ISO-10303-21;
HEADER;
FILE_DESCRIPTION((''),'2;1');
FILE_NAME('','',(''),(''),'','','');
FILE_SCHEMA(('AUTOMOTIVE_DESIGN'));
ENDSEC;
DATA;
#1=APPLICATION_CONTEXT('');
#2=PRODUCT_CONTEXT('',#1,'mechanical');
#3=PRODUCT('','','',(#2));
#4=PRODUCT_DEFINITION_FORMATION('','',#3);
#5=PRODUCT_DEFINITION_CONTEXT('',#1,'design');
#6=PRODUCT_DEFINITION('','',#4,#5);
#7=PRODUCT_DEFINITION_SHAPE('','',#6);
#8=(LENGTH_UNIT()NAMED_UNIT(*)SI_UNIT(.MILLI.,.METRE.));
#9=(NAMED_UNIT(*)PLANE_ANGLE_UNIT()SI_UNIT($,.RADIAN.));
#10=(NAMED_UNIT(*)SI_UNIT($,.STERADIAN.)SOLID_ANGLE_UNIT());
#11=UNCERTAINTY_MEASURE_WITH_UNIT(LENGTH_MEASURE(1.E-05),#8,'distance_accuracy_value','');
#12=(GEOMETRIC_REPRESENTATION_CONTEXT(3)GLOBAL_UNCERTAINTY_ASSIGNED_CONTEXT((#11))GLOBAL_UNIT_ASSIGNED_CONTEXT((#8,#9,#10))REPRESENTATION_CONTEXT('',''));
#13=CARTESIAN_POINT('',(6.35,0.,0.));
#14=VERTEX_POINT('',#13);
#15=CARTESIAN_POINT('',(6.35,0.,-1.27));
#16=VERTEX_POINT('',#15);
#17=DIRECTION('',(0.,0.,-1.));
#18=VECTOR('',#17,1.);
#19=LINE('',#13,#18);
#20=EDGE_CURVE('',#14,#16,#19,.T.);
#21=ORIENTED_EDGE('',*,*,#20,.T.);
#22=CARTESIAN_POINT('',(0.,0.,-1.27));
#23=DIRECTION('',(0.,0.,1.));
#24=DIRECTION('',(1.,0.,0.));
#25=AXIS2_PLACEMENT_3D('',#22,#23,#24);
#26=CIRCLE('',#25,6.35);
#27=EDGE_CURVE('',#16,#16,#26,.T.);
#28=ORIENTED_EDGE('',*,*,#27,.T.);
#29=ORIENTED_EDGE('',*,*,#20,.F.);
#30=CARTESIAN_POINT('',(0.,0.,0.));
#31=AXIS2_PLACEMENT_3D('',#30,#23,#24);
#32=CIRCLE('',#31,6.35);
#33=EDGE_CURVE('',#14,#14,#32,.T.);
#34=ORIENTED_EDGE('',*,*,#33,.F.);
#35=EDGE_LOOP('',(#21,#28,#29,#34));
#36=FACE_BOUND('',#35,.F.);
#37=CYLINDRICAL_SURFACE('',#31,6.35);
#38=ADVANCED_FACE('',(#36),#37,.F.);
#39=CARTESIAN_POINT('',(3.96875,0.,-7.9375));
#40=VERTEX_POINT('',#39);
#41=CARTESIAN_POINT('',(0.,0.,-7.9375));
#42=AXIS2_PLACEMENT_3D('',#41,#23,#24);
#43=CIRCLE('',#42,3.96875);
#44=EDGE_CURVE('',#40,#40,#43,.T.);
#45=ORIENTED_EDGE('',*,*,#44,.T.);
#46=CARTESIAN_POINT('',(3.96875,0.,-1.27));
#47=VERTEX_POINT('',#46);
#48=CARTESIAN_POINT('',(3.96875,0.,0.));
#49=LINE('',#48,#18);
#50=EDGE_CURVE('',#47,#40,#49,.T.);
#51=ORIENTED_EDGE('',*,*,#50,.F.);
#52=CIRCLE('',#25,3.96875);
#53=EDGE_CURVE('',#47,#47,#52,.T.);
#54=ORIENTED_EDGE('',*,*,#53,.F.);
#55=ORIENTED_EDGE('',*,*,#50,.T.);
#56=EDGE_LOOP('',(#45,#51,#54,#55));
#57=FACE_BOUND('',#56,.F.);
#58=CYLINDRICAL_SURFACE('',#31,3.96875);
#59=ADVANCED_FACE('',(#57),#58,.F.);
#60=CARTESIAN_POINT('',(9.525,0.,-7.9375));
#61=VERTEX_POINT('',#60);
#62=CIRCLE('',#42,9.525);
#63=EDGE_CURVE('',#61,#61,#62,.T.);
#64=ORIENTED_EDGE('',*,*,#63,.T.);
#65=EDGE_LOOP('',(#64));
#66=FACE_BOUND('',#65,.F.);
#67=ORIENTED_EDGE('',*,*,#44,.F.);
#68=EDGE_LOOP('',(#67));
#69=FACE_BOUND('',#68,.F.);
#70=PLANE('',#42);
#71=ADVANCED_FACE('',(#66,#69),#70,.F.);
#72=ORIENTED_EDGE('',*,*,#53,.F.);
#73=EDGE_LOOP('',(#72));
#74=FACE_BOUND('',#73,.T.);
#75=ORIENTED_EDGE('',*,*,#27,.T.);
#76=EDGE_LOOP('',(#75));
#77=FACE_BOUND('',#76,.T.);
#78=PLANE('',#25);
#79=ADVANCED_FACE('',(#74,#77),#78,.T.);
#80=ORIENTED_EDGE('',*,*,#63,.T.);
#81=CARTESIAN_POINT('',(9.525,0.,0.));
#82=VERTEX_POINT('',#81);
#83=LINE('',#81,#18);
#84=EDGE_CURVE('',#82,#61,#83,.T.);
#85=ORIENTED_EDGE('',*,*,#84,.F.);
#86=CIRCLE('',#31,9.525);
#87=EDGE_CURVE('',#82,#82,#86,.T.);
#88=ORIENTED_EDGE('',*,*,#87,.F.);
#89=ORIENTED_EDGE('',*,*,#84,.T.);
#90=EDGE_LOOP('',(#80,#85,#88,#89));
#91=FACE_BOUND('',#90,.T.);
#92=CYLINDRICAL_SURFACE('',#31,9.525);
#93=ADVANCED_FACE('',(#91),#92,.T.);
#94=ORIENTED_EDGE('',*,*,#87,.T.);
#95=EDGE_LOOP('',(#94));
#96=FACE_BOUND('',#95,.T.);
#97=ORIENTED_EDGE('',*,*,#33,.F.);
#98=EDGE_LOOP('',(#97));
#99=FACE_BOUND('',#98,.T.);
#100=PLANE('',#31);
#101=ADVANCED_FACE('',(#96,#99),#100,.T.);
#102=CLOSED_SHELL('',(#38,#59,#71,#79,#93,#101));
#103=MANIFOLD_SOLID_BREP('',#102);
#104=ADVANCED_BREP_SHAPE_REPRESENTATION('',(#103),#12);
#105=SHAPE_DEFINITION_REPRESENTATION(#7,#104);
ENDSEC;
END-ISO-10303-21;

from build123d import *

# Parameters (mm, degrees)
F0_R     = 9.525
F0_R_2   = 6.35
F0_R_3   = 3.96875
F1_DEPTH = 7.9375
F2_DEPTH = 1.27


# Not quite as in the source:
# - a length typed as a fraction of an inch, garbled in the dataset ("3 / 203.2 mm" for 3/8 in), is restored


with BuildPart() as f1:
    # F0 (on Top) → F1 (new body)
    with BuildSketch(Plane.XY):
        Circle(F0_R)
        Circle(F0_R_2, mode=Mode.SUBTRACT)
        Circle(F0_R_2)
        Circle(F0_R_3, mode=Mode.SUBTRACT)
    extrude(amount=-F1_DEPTH)

    # F0 (on Top) → F2 (cut)
    with BuildSketch(Plane.XY):
        Circle(F0_R_2)
        Circle(F0_R_3, mode=Mode.SUBTRACT)
    extrude(amount=-F2_DEPTH, mode=Mode.SUBTRACT)


solid = f1.part
